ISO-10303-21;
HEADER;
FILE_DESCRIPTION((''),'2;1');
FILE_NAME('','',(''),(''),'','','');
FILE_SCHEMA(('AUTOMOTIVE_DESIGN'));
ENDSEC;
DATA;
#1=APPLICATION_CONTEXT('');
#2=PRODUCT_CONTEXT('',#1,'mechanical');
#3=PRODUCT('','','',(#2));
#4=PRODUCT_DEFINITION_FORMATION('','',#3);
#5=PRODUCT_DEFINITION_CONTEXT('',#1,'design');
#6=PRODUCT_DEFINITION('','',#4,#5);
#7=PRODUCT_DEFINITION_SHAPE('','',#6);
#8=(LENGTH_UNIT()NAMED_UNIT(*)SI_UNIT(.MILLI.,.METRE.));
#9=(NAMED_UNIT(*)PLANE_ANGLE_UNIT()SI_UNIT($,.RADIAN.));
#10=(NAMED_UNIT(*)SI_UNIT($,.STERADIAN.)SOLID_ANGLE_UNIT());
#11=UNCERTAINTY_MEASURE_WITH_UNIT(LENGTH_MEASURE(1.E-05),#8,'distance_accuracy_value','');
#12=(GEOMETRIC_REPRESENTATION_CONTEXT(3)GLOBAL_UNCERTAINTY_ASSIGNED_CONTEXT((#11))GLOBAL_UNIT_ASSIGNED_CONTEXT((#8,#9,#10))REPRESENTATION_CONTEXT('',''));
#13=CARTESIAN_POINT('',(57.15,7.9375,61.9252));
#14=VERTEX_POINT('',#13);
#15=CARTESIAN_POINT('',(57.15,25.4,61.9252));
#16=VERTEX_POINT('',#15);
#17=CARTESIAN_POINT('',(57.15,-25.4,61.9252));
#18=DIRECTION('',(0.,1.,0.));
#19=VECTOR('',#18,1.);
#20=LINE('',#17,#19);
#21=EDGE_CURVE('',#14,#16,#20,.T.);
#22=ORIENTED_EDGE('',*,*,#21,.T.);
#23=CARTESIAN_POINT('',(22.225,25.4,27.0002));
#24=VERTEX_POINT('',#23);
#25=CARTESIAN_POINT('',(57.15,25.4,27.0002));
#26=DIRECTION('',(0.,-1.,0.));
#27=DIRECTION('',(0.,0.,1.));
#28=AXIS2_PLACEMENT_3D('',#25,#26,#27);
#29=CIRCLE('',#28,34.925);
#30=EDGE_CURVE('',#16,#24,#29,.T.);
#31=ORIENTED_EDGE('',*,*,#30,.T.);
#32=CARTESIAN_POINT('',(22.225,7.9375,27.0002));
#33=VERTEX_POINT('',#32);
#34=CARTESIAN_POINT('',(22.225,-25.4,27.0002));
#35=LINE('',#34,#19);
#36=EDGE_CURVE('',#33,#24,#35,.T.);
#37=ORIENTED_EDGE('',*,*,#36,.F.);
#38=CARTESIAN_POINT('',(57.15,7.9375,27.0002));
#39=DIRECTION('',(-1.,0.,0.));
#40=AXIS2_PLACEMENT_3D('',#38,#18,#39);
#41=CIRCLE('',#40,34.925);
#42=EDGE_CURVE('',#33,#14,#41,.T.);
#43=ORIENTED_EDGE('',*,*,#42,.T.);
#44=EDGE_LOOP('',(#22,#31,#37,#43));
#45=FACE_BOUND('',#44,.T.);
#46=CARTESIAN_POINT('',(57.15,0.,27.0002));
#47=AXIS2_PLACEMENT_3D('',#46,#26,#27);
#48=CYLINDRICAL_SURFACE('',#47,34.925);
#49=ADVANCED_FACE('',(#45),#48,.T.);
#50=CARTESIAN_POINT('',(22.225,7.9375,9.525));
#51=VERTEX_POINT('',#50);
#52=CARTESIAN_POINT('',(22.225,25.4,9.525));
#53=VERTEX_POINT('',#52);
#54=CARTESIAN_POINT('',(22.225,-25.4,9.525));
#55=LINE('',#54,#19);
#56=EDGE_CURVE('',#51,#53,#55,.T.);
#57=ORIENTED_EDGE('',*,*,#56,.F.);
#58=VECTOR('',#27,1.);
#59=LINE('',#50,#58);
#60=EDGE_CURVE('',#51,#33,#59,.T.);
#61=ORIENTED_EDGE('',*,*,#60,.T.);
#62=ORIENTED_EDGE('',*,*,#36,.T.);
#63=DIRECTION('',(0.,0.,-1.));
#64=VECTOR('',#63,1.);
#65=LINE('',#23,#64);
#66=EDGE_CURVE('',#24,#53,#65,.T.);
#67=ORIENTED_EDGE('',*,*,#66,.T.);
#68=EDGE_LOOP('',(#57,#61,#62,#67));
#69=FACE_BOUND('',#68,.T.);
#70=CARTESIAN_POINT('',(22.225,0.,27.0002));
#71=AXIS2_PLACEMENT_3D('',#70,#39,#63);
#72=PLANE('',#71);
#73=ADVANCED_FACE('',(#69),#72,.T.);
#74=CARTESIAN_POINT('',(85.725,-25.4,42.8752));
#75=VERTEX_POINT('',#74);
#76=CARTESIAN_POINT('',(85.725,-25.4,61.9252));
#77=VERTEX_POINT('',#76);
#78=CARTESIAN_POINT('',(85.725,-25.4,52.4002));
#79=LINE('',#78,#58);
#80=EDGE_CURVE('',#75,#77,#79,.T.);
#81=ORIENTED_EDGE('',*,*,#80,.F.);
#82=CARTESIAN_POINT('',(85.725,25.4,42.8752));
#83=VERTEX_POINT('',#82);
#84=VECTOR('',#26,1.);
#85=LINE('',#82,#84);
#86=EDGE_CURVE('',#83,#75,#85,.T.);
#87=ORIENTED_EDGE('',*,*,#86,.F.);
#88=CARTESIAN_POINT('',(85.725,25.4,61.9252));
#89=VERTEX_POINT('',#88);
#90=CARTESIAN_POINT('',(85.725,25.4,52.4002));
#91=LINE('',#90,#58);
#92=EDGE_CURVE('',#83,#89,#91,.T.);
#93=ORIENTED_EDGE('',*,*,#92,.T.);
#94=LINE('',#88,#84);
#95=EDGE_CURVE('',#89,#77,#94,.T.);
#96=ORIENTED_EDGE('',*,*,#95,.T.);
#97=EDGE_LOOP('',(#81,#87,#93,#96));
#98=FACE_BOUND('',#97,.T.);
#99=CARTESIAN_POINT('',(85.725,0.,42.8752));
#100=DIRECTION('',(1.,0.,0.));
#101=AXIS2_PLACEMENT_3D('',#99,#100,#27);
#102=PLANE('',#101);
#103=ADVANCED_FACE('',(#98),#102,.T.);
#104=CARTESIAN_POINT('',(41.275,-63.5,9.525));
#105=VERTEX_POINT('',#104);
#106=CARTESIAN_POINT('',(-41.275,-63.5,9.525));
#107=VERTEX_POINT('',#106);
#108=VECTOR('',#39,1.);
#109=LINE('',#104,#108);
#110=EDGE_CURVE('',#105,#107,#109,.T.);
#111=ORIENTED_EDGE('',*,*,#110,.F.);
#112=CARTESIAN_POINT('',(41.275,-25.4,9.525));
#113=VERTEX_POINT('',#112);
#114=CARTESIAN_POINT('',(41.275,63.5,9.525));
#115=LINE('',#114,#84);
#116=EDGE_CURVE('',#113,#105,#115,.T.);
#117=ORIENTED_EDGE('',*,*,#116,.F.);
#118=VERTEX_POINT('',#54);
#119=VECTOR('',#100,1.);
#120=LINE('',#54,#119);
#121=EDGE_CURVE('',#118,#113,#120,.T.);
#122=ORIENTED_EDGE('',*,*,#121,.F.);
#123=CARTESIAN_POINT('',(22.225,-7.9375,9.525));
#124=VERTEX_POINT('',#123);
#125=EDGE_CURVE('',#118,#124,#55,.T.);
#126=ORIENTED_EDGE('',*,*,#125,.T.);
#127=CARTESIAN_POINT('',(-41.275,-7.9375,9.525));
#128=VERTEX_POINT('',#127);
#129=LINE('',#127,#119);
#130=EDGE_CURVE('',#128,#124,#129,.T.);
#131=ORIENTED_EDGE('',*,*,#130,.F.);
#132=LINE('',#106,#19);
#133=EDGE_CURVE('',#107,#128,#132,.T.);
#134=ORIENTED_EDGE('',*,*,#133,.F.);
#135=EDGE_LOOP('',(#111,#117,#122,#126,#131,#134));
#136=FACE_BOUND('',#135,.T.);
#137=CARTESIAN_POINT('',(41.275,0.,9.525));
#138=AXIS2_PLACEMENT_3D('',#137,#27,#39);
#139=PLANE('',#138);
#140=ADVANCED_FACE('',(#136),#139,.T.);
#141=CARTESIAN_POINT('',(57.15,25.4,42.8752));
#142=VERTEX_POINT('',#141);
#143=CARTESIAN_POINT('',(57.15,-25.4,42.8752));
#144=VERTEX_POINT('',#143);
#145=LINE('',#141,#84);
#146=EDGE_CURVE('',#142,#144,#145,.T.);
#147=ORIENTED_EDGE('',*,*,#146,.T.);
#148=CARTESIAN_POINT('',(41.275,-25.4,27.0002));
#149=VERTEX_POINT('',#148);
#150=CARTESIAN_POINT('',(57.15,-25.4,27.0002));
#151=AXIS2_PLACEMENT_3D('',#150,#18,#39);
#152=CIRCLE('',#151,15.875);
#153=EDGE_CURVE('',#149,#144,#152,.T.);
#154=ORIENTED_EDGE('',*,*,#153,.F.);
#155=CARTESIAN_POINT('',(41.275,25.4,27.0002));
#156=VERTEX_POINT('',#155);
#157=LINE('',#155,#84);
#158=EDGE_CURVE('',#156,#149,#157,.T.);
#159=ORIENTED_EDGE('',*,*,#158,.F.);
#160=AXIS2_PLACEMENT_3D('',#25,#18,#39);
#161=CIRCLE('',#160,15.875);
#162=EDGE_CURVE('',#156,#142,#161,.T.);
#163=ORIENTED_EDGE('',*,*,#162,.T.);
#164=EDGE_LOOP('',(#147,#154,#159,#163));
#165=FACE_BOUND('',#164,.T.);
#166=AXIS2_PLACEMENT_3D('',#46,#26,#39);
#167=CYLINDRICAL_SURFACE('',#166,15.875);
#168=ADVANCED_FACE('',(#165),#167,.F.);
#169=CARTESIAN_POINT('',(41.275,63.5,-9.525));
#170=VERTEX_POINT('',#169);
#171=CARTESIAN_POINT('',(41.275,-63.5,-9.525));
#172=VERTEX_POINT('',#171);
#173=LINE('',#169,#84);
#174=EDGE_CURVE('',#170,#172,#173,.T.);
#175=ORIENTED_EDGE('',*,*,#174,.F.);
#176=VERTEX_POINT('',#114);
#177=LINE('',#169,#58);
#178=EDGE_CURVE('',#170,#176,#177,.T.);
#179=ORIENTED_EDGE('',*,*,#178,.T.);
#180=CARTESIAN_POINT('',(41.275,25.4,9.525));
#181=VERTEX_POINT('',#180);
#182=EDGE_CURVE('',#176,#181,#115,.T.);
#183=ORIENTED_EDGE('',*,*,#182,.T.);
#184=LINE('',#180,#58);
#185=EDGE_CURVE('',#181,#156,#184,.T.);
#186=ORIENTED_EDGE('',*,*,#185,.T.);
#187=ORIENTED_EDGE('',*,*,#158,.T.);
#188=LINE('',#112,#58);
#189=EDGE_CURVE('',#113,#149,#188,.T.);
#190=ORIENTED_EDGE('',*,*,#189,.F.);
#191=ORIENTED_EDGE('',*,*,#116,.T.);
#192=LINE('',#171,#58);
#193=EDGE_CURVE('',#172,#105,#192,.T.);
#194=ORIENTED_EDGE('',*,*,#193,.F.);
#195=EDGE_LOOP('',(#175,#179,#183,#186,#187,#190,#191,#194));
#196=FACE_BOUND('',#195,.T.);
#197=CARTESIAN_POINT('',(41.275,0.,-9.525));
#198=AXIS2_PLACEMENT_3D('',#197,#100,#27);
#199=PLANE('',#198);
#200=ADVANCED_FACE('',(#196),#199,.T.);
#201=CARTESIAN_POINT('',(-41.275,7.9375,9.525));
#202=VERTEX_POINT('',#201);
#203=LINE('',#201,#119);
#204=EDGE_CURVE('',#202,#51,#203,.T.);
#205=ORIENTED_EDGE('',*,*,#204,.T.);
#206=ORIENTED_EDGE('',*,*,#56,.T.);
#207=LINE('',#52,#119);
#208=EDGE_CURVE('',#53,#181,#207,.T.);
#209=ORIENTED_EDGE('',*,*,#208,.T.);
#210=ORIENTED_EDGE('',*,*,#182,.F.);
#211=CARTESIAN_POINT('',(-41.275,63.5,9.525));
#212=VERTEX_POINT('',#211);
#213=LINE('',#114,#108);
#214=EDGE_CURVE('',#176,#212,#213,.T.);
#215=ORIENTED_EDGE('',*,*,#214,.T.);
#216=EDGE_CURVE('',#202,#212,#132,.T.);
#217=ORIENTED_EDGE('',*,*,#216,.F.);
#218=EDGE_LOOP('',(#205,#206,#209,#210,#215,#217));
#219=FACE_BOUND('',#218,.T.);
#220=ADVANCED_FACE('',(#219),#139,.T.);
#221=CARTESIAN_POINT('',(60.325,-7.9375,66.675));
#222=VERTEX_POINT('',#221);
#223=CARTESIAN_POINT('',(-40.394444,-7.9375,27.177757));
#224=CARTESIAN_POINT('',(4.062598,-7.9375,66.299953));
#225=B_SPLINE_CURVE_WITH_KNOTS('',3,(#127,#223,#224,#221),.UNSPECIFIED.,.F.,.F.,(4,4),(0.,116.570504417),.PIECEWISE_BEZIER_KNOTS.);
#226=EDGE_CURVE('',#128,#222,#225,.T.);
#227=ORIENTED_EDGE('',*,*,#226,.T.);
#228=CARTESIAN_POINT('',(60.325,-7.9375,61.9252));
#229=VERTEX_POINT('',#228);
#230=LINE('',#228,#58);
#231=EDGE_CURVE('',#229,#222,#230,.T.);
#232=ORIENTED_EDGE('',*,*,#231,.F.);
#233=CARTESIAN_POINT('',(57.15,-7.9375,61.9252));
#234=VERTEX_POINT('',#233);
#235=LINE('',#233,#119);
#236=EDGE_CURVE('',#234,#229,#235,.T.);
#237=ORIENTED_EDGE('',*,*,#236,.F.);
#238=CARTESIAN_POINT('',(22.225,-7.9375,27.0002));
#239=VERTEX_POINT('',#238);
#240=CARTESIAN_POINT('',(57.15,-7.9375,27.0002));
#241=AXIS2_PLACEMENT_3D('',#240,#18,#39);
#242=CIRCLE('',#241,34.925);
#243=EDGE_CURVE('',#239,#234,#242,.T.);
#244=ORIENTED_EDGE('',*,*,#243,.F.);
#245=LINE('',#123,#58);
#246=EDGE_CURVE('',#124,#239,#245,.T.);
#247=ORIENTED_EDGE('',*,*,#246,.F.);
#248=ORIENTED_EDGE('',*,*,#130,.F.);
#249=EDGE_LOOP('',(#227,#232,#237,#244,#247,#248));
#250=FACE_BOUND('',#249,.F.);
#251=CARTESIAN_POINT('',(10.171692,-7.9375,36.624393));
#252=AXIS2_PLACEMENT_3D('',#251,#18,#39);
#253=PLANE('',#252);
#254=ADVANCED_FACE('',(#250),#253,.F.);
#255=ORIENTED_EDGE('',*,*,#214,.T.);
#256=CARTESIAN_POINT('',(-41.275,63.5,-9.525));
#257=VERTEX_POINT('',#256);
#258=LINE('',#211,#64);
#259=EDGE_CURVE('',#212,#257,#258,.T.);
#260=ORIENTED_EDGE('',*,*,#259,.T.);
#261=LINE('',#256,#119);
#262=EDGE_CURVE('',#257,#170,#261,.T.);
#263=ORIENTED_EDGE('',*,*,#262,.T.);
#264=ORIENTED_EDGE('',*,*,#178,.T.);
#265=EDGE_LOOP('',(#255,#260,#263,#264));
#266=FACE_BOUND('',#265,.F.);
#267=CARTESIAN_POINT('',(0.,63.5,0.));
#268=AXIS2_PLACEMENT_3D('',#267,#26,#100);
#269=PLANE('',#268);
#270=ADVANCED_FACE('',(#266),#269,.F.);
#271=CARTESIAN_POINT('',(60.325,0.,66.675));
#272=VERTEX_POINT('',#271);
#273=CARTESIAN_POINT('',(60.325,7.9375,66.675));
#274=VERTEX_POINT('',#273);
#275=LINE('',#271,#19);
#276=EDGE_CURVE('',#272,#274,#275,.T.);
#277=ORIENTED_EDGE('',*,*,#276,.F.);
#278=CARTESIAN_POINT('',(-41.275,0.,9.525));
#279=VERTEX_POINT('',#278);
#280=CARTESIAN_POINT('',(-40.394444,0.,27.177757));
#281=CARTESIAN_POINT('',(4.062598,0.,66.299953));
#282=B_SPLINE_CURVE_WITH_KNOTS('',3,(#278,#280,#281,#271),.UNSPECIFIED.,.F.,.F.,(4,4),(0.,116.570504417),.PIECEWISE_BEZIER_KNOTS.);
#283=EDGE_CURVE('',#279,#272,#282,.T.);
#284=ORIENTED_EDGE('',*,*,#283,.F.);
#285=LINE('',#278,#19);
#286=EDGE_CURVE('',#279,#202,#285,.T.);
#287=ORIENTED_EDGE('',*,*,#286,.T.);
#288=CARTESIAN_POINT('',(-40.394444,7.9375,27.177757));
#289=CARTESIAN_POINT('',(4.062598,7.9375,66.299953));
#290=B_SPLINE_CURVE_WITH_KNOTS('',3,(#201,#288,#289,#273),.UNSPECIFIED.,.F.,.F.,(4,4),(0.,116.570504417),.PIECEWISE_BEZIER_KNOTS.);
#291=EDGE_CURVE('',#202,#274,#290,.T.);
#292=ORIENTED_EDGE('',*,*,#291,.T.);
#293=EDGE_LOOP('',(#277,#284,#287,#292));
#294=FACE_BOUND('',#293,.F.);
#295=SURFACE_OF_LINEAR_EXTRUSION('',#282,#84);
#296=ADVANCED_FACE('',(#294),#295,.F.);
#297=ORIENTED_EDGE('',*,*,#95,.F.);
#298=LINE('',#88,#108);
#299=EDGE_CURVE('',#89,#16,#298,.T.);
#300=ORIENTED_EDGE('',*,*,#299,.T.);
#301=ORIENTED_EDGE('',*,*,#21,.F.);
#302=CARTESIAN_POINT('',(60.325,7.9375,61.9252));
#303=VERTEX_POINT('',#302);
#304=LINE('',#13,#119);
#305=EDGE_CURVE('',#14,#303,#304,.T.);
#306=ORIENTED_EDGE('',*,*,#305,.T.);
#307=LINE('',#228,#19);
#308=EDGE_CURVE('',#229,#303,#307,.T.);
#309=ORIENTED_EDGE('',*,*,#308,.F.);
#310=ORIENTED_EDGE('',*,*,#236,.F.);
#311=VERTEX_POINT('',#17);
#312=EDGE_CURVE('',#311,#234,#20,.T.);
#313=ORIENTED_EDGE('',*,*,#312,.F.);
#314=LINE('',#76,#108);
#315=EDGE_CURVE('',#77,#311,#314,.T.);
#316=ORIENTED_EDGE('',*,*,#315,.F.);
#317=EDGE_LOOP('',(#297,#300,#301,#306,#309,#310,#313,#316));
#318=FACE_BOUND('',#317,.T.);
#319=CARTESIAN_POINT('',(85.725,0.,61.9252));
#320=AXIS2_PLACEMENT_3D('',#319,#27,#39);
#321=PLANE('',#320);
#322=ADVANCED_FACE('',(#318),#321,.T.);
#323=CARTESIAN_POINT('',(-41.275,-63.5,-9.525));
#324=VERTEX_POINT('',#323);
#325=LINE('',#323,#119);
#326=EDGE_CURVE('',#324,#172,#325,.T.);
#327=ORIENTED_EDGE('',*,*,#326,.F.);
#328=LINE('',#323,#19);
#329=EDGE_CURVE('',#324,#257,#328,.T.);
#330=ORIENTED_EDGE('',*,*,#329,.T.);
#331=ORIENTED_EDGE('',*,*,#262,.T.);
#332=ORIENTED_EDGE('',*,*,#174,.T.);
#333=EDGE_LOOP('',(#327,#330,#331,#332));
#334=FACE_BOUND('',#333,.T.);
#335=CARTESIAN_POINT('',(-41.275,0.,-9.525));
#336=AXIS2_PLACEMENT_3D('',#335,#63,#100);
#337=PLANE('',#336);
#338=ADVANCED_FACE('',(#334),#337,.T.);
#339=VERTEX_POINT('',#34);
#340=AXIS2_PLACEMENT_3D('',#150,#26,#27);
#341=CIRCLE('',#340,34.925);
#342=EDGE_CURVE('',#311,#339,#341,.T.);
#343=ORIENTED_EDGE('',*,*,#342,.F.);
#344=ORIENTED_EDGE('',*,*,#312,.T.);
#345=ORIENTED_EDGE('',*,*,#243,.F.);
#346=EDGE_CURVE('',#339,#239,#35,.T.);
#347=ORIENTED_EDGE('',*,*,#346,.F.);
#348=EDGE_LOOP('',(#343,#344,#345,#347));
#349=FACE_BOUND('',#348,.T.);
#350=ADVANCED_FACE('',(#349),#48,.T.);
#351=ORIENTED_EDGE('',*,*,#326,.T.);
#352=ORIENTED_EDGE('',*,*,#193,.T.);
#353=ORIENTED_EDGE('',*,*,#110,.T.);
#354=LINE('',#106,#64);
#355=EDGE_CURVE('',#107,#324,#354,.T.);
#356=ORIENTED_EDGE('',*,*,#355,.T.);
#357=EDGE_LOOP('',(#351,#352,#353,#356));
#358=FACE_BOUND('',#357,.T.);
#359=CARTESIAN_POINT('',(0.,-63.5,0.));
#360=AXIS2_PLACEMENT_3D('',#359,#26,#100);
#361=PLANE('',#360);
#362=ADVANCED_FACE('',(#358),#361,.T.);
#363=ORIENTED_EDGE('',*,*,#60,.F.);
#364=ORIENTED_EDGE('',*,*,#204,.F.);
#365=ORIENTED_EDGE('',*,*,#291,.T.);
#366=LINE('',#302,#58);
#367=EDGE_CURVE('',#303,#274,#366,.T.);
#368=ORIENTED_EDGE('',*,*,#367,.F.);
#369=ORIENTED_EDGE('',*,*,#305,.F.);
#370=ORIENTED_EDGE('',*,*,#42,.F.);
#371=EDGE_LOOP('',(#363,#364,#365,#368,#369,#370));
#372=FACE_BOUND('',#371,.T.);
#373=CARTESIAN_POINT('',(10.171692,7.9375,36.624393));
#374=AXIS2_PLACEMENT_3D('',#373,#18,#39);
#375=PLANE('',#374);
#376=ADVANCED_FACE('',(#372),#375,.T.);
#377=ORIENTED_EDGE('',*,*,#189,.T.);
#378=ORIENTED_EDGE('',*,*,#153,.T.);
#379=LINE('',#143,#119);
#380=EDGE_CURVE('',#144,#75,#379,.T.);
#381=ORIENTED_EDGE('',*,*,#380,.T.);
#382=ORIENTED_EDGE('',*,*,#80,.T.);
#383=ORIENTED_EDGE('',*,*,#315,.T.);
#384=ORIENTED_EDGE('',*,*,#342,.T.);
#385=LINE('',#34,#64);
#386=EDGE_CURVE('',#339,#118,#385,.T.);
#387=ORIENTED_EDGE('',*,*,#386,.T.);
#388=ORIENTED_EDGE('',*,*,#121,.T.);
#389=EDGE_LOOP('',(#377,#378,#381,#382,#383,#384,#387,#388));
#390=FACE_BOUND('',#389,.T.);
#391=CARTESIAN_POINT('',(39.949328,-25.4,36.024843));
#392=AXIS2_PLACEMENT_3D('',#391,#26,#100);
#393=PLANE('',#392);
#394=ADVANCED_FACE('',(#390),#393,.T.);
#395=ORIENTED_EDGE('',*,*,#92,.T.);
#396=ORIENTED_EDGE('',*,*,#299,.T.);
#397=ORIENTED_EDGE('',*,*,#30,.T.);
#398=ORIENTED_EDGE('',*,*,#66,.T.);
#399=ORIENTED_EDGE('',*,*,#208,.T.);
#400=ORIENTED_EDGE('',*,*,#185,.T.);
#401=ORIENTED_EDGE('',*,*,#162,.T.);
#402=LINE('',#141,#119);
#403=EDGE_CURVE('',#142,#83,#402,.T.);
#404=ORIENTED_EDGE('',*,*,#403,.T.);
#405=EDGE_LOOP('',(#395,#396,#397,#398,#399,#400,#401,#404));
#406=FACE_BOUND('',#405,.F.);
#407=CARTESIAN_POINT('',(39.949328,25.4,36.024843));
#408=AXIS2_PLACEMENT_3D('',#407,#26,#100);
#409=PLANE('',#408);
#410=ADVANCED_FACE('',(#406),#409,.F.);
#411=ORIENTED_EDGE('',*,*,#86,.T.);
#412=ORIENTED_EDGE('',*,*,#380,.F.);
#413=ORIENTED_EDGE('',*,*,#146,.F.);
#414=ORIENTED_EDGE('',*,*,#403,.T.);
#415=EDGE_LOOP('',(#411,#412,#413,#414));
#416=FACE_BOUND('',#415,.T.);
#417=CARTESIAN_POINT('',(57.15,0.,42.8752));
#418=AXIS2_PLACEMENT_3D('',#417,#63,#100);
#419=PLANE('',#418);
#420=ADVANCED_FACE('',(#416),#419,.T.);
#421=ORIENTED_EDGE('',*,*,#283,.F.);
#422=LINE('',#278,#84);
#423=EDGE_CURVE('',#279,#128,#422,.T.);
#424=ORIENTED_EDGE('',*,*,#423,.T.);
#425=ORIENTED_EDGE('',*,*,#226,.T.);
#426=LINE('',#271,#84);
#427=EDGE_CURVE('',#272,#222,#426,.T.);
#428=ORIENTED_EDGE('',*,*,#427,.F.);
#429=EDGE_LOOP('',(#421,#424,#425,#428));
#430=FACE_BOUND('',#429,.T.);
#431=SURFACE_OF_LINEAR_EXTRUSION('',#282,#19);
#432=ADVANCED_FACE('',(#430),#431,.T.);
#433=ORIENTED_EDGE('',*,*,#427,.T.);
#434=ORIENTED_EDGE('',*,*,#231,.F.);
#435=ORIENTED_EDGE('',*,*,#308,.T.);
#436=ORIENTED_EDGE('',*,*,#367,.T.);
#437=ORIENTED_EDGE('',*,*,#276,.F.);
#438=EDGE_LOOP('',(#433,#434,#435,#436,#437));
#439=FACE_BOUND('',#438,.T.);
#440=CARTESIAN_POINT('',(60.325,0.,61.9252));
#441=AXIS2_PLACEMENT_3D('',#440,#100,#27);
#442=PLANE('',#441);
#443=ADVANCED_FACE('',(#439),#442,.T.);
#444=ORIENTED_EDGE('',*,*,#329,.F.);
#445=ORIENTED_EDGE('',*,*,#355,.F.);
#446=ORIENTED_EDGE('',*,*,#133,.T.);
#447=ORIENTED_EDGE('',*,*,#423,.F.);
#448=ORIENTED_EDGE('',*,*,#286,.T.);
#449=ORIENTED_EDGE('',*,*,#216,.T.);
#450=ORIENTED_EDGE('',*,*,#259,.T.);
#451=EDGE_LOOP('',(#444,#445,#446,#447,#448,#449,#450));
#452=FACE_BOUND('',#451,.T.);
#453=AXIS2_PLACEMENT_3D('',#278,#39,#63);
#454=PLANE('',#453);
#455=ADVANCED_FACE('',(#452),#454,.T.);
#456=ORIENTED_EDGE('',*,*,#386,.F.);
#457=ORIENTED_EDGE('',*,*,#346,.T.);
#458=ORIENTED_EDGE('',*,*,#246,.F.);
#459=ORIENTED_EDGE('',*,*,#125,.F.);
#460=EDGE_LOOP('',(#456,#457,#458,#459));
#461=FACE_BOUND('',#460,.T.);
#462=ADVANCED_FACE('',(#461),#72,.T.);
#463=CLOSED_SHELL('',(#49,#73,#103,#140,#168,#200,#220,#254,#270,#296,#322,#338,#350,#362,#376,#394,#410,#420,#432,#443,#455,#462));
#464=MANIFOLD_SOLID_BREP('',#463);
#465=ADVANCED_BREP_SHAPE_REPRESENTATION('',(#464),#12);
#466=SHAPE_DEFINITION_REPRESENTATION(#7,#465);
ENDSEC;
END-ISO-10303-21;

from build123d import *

# Parameters (mm, degrees)
F1_DEPTH = 63.5
F0_W     = 25.4
F0_H     = 19.05
F2_DEPTH = 25.4
F3_DEPTH = 7.9375


# Not quite as in the source:
# - a feature of the source that left no trace in its solid (it failed there, or was rolled back) is left out


with BuildPart() as f1:
    # F0 (on Front) → F1 (new body, symmetric)
    with BuildSketch(Plane.XZ):
        Polygon((-41.275, -9.525), (41.275, -9.525), (41.275, 9.525), (22.225, 9.525), (-41.275, 9.525), align=None)
    extrude(amount=F1_DEPTH, both=True)

    # F0 (on Front) → F2 (join, symmetric)
    with BuildSketch(Plane.XZ):
        with BuildLine():
            Line((22.225, 9.525), (41.275, 9.525))
            Line((41.275, 9.525), (41.275, 27.0002))
            ThreePointArc((41.275, 27.0002), (45.9246798487, 38.2255201513), (57.15, 42.8752))
            Line((57.15, 42.8752), (60.325, 42.8752))
            Line((60.325, 42.8752), (60.325, 61.9252))
            Line((60.325, 61.9252), (57.15, 61.9252))
            ThreePointArc((57.15, 61.9252), (32.4542956671, 51.6959043329), (22.225, 27.0002))
            Line((22.225, 27.0002), (22.225, 9.525))
        make_face()
        with Locations((73.025, 52.4002)):
            Rectangle(F0_W, F0_H)
    extrude(amount=F2_DEPTH, both=True)

    # F0 (on Front) → F3 (join, symmetric)
    with BuildSketch(Plane.XZ):
        with BuildLine():
            add(Edge.make_bspline(
                [(-41.275, 9.525), (-40.3944440186, 27.1777566522), (4.0625981055, 66.2999525666), (60.325, 66.675)],
                knots=[0, 0, 0, 0, 116.5705044169, 116.5705044169, 116.5705044169, 116.5705044169], degree=3))
            Line((-41.275, 9.525), (22.225, 9.525))
            Line((22.225, 9.525), (22.225, 27.0002))
            ThreePointArc((22.225, 27.0002), (32.4542956671, 51.6959043329), (57.15, 61.9252))
            Line((57.15, 61.9252), (60.325, 61.9252))
            Line((60.325, 61.9252), (60.325, 66.675))
        make_face()
    extrude(amount=F3_DEPTH, both=True)


solid = f1.part
